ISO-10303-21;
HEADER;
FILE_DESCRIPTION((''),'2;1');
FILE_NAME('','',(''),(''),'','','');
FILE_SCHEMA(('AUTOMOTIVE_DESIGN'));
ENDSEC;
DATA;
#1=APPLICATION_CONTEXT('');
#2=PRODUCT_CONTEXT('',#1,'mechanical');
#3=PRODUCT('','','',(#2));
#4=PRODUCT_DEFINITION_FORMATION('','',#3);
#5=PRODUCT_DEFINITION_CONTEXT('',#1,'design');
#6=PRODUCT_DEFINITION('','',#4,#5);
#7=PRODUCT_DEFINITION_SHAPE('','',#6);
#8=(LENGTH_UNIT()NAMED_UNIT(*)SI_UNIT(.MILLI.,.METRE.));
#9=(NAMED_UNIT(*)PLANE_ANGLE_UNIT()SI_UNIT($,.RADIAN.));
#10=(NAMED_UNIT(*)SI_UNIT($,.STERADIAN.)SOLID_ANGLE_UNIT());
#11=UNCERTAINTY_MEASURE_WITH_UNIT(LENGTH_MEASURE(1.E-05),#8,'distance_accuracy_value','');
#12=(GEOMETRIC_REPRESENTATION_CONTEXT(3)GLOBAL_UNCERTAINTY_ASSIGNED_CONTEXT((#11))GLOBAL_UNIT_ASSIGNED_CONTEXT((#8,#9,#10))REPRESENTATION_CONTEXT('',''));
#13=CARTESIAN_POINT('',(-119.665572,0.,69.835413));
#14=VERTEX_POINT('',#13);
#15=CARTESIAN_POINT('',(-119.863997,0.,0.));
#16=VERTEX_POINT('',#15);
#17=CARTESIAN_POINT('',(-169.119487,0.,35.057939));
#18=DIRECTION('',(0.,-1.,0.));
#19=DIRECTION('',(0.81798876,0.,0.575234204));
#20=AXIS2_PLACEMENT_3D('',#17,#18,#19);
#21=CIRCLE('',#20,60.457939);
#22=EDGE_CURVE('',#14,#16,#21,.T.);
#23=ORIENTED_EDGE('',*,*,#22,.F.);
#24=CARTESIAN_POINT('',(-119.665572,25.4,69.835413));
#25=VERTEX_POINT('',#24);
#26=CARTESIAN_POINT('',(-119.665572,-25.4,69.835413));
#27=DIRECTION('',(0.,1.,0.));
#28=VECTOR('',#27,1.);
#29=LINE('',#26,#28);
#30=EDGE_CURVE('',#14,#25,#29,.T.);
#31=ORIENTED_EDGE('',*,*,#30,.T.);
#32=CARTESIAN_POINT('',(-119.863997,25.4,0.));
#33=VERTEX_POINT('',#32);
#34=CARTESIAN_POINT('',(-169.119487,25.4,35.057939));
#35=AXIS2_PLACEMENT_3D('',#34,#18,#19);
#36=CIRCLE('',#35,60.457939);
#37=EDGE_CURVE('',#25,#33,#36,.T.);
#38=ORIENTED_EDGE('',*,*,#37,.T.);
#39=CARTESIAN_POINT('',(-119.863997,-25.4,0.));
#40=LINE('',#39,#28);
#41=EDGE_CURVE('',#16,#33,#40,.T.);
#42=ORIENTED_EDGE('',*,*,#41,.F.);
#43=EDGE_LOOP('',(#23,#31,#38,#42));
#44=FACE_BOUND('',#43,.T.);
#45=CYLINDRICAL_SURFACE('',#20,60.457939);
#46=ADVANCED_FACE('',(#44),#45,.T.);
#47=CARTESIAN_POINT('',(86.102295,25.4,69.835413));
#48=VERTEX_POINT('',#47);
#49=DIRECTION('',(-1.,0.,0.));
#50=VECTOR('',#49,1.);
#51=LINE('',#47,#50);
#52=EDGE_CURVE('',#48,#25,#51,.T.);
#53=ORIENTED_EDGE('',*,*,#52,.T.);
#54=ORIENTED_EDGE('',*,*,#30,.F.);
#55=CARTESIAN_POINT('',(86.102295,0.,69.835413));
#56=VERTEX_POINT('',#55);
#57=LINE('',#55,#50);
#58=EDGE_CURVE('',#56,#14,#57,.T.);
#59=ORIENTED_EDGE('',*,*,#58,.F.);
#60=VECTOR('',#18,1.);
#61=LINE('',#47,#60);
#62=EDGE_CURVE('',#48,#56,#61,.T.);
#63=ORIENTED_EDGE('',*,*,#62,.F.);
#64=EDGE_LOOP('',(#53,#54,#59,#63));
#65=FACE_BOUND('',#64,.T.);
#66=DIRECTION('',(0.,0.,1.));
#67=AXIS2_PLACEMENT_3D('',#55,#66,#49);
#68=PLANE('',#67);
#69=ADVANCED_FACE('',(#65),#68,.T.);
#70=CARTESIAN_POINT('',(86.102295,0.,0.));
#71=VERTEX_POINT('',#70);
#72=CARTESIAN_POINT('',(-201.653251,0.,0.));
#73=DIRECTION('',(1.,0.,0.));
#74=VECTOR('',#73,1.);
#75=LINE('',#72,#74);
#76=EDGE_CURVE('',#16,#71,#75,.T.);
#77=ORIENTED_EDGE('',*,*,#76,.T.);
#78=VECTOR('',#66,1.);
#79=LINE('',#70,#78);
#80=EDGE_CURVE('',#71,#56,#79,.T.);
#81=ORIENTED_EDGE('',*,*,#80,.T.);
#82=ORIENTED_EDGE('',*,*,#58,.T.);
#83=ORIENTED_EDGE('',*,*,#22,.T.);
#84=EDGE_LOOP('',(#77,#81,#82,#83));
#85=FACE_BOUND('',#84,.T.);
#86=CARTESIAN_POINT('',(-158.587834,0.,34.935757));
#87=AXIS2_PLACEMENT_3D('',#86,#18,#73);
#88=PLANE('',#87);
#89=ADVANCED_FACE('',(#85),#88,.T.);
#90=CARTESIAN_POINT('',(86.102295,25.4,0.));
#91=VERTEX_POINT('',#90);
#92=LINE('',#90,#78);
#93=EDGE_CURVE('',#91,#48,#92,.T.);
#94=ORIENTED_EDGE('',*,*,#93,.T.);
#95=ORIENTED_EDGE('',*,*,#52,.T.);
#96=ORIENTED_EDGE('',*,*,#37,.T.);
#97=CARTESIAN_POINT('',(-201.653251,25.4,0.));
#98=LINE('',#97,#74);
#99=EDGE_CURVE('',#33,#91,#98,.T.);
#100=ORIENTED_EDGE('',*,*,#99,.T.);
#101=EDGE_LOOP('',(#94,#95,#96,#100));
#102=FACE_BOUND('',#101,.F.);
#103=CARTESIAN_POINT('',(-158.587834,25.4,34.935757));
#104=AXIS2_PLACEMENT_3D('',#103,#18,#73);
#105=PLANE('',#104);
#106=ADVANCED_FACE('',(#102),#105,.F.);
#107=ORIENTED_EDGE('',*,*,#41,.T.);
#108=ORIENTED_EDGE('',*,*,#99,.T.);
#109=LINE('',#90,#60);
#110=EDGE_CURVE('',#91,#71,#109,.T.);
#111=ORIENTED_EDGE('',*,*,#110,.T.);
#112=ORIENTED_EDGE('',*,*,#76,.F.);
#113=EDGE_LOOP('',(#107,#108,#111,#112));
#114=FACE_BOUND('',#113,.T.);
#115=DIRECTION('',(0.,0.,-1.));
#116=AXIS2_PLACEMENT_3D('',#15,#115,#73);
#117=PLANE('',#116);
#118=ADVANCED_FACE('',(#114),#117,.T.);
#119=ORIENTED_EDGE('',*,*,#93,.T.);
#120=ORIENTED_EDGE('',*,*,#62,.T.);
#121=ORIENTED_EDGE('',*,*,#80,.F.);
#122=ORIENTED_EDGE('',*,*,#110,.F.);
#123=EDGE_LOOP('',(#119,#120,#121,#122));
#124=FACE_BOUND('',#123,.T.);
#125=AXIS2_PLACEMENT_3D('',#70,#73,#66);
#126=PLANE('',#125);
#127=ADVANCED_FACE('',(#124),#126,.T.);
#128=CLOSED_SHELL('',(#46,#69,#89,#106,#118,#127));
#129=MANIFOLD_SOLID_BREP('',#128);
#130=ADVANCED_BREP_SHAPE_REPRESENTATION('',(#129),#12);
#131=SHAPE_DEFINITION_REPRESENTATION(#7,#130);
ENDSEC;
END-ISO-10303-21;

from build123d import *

# Parameters (mm, degrees)
F1_DEPTH = 25.4
F2_DEPTH = 25.4
F3_DEPTH = 25.4


with BuildPart() as f1:
    # F0 (on Front) → F1 (new body)
    with BuildSketch(Plane.XZ):
        with BuildLine():
            ThreePointArc((-119.86399662, 0), (-111.5302178098, 16.6558061897), (-108.6615478184, 35.0579387173))
            ThreePointArc((-108.6615478184, 35.0579387173), (-111.4781642304, 53.2963683876), (-119.6655722325, 69.8354129505))
            Line((-119.6655722325, 69.8354129505), (-201.6532506958, 69.8354129505))
            Line((-201.6532506958, 69.8354129505), (-201.6532506958, 0))
            Line((-201.6532506958, 0), (-119.86399662, 0))
        make_face()
        with BuildLine():
            ThreePointArc((-119.6655722325, 69.8354129505), (-111.4781642304, 53.2963683876), (-108.6615478184, 35.0579387173))
            ThreePointArc((-108.6615478184, 35.0579387173), (-111.5302178098, 16.6558061897), (-119.86399662, 0))
            Line((-119.86399662, 0), (86.1022950306, 0))
            Line((86.1022950306, 0), (86.1022950306, 69.8354129505))
            Line((86.1022950306, 69.8354129505), (-119.6655722325, 69.8354129505))
        make_face()
        with BuildLine():
            Line((-201.6532506958, 69.8354129505), (-119.6655722325, 69.8354129505))
            ThreePointArc((-119.6655722325, 69.8354129505), (-229.5771812139, 35.2297180557), (-119.86399662, 0))
            Line((-119.86399662, 0), (-201.6532506958, 0))
            Line((-201.6532506958, 0), (-201.6532506958, 69.8354129505))
        make_face()
    extrude(amount=F1_DEPTH)

    # F2 (add): a face of the model
    f2_faces = [f1.faces().sort_by_distance(p)[0] for p in [
        (-83.8129637721, 0, 34.9783538695),
    ]]
    extrude(f2_faces, amount=F2_DEPTH)

    # F3 (cut): a face of the model
    f3_faces = [f1.faces().sort_by_distance(p)[0] for p in [
        (-83.8129637721, -25.4, 34.9783538695),
    ]]
    extrude(f3_faces, amount=-F3_DEPTH, mode=Mode.SUBTRACT)


solid = f1.part
